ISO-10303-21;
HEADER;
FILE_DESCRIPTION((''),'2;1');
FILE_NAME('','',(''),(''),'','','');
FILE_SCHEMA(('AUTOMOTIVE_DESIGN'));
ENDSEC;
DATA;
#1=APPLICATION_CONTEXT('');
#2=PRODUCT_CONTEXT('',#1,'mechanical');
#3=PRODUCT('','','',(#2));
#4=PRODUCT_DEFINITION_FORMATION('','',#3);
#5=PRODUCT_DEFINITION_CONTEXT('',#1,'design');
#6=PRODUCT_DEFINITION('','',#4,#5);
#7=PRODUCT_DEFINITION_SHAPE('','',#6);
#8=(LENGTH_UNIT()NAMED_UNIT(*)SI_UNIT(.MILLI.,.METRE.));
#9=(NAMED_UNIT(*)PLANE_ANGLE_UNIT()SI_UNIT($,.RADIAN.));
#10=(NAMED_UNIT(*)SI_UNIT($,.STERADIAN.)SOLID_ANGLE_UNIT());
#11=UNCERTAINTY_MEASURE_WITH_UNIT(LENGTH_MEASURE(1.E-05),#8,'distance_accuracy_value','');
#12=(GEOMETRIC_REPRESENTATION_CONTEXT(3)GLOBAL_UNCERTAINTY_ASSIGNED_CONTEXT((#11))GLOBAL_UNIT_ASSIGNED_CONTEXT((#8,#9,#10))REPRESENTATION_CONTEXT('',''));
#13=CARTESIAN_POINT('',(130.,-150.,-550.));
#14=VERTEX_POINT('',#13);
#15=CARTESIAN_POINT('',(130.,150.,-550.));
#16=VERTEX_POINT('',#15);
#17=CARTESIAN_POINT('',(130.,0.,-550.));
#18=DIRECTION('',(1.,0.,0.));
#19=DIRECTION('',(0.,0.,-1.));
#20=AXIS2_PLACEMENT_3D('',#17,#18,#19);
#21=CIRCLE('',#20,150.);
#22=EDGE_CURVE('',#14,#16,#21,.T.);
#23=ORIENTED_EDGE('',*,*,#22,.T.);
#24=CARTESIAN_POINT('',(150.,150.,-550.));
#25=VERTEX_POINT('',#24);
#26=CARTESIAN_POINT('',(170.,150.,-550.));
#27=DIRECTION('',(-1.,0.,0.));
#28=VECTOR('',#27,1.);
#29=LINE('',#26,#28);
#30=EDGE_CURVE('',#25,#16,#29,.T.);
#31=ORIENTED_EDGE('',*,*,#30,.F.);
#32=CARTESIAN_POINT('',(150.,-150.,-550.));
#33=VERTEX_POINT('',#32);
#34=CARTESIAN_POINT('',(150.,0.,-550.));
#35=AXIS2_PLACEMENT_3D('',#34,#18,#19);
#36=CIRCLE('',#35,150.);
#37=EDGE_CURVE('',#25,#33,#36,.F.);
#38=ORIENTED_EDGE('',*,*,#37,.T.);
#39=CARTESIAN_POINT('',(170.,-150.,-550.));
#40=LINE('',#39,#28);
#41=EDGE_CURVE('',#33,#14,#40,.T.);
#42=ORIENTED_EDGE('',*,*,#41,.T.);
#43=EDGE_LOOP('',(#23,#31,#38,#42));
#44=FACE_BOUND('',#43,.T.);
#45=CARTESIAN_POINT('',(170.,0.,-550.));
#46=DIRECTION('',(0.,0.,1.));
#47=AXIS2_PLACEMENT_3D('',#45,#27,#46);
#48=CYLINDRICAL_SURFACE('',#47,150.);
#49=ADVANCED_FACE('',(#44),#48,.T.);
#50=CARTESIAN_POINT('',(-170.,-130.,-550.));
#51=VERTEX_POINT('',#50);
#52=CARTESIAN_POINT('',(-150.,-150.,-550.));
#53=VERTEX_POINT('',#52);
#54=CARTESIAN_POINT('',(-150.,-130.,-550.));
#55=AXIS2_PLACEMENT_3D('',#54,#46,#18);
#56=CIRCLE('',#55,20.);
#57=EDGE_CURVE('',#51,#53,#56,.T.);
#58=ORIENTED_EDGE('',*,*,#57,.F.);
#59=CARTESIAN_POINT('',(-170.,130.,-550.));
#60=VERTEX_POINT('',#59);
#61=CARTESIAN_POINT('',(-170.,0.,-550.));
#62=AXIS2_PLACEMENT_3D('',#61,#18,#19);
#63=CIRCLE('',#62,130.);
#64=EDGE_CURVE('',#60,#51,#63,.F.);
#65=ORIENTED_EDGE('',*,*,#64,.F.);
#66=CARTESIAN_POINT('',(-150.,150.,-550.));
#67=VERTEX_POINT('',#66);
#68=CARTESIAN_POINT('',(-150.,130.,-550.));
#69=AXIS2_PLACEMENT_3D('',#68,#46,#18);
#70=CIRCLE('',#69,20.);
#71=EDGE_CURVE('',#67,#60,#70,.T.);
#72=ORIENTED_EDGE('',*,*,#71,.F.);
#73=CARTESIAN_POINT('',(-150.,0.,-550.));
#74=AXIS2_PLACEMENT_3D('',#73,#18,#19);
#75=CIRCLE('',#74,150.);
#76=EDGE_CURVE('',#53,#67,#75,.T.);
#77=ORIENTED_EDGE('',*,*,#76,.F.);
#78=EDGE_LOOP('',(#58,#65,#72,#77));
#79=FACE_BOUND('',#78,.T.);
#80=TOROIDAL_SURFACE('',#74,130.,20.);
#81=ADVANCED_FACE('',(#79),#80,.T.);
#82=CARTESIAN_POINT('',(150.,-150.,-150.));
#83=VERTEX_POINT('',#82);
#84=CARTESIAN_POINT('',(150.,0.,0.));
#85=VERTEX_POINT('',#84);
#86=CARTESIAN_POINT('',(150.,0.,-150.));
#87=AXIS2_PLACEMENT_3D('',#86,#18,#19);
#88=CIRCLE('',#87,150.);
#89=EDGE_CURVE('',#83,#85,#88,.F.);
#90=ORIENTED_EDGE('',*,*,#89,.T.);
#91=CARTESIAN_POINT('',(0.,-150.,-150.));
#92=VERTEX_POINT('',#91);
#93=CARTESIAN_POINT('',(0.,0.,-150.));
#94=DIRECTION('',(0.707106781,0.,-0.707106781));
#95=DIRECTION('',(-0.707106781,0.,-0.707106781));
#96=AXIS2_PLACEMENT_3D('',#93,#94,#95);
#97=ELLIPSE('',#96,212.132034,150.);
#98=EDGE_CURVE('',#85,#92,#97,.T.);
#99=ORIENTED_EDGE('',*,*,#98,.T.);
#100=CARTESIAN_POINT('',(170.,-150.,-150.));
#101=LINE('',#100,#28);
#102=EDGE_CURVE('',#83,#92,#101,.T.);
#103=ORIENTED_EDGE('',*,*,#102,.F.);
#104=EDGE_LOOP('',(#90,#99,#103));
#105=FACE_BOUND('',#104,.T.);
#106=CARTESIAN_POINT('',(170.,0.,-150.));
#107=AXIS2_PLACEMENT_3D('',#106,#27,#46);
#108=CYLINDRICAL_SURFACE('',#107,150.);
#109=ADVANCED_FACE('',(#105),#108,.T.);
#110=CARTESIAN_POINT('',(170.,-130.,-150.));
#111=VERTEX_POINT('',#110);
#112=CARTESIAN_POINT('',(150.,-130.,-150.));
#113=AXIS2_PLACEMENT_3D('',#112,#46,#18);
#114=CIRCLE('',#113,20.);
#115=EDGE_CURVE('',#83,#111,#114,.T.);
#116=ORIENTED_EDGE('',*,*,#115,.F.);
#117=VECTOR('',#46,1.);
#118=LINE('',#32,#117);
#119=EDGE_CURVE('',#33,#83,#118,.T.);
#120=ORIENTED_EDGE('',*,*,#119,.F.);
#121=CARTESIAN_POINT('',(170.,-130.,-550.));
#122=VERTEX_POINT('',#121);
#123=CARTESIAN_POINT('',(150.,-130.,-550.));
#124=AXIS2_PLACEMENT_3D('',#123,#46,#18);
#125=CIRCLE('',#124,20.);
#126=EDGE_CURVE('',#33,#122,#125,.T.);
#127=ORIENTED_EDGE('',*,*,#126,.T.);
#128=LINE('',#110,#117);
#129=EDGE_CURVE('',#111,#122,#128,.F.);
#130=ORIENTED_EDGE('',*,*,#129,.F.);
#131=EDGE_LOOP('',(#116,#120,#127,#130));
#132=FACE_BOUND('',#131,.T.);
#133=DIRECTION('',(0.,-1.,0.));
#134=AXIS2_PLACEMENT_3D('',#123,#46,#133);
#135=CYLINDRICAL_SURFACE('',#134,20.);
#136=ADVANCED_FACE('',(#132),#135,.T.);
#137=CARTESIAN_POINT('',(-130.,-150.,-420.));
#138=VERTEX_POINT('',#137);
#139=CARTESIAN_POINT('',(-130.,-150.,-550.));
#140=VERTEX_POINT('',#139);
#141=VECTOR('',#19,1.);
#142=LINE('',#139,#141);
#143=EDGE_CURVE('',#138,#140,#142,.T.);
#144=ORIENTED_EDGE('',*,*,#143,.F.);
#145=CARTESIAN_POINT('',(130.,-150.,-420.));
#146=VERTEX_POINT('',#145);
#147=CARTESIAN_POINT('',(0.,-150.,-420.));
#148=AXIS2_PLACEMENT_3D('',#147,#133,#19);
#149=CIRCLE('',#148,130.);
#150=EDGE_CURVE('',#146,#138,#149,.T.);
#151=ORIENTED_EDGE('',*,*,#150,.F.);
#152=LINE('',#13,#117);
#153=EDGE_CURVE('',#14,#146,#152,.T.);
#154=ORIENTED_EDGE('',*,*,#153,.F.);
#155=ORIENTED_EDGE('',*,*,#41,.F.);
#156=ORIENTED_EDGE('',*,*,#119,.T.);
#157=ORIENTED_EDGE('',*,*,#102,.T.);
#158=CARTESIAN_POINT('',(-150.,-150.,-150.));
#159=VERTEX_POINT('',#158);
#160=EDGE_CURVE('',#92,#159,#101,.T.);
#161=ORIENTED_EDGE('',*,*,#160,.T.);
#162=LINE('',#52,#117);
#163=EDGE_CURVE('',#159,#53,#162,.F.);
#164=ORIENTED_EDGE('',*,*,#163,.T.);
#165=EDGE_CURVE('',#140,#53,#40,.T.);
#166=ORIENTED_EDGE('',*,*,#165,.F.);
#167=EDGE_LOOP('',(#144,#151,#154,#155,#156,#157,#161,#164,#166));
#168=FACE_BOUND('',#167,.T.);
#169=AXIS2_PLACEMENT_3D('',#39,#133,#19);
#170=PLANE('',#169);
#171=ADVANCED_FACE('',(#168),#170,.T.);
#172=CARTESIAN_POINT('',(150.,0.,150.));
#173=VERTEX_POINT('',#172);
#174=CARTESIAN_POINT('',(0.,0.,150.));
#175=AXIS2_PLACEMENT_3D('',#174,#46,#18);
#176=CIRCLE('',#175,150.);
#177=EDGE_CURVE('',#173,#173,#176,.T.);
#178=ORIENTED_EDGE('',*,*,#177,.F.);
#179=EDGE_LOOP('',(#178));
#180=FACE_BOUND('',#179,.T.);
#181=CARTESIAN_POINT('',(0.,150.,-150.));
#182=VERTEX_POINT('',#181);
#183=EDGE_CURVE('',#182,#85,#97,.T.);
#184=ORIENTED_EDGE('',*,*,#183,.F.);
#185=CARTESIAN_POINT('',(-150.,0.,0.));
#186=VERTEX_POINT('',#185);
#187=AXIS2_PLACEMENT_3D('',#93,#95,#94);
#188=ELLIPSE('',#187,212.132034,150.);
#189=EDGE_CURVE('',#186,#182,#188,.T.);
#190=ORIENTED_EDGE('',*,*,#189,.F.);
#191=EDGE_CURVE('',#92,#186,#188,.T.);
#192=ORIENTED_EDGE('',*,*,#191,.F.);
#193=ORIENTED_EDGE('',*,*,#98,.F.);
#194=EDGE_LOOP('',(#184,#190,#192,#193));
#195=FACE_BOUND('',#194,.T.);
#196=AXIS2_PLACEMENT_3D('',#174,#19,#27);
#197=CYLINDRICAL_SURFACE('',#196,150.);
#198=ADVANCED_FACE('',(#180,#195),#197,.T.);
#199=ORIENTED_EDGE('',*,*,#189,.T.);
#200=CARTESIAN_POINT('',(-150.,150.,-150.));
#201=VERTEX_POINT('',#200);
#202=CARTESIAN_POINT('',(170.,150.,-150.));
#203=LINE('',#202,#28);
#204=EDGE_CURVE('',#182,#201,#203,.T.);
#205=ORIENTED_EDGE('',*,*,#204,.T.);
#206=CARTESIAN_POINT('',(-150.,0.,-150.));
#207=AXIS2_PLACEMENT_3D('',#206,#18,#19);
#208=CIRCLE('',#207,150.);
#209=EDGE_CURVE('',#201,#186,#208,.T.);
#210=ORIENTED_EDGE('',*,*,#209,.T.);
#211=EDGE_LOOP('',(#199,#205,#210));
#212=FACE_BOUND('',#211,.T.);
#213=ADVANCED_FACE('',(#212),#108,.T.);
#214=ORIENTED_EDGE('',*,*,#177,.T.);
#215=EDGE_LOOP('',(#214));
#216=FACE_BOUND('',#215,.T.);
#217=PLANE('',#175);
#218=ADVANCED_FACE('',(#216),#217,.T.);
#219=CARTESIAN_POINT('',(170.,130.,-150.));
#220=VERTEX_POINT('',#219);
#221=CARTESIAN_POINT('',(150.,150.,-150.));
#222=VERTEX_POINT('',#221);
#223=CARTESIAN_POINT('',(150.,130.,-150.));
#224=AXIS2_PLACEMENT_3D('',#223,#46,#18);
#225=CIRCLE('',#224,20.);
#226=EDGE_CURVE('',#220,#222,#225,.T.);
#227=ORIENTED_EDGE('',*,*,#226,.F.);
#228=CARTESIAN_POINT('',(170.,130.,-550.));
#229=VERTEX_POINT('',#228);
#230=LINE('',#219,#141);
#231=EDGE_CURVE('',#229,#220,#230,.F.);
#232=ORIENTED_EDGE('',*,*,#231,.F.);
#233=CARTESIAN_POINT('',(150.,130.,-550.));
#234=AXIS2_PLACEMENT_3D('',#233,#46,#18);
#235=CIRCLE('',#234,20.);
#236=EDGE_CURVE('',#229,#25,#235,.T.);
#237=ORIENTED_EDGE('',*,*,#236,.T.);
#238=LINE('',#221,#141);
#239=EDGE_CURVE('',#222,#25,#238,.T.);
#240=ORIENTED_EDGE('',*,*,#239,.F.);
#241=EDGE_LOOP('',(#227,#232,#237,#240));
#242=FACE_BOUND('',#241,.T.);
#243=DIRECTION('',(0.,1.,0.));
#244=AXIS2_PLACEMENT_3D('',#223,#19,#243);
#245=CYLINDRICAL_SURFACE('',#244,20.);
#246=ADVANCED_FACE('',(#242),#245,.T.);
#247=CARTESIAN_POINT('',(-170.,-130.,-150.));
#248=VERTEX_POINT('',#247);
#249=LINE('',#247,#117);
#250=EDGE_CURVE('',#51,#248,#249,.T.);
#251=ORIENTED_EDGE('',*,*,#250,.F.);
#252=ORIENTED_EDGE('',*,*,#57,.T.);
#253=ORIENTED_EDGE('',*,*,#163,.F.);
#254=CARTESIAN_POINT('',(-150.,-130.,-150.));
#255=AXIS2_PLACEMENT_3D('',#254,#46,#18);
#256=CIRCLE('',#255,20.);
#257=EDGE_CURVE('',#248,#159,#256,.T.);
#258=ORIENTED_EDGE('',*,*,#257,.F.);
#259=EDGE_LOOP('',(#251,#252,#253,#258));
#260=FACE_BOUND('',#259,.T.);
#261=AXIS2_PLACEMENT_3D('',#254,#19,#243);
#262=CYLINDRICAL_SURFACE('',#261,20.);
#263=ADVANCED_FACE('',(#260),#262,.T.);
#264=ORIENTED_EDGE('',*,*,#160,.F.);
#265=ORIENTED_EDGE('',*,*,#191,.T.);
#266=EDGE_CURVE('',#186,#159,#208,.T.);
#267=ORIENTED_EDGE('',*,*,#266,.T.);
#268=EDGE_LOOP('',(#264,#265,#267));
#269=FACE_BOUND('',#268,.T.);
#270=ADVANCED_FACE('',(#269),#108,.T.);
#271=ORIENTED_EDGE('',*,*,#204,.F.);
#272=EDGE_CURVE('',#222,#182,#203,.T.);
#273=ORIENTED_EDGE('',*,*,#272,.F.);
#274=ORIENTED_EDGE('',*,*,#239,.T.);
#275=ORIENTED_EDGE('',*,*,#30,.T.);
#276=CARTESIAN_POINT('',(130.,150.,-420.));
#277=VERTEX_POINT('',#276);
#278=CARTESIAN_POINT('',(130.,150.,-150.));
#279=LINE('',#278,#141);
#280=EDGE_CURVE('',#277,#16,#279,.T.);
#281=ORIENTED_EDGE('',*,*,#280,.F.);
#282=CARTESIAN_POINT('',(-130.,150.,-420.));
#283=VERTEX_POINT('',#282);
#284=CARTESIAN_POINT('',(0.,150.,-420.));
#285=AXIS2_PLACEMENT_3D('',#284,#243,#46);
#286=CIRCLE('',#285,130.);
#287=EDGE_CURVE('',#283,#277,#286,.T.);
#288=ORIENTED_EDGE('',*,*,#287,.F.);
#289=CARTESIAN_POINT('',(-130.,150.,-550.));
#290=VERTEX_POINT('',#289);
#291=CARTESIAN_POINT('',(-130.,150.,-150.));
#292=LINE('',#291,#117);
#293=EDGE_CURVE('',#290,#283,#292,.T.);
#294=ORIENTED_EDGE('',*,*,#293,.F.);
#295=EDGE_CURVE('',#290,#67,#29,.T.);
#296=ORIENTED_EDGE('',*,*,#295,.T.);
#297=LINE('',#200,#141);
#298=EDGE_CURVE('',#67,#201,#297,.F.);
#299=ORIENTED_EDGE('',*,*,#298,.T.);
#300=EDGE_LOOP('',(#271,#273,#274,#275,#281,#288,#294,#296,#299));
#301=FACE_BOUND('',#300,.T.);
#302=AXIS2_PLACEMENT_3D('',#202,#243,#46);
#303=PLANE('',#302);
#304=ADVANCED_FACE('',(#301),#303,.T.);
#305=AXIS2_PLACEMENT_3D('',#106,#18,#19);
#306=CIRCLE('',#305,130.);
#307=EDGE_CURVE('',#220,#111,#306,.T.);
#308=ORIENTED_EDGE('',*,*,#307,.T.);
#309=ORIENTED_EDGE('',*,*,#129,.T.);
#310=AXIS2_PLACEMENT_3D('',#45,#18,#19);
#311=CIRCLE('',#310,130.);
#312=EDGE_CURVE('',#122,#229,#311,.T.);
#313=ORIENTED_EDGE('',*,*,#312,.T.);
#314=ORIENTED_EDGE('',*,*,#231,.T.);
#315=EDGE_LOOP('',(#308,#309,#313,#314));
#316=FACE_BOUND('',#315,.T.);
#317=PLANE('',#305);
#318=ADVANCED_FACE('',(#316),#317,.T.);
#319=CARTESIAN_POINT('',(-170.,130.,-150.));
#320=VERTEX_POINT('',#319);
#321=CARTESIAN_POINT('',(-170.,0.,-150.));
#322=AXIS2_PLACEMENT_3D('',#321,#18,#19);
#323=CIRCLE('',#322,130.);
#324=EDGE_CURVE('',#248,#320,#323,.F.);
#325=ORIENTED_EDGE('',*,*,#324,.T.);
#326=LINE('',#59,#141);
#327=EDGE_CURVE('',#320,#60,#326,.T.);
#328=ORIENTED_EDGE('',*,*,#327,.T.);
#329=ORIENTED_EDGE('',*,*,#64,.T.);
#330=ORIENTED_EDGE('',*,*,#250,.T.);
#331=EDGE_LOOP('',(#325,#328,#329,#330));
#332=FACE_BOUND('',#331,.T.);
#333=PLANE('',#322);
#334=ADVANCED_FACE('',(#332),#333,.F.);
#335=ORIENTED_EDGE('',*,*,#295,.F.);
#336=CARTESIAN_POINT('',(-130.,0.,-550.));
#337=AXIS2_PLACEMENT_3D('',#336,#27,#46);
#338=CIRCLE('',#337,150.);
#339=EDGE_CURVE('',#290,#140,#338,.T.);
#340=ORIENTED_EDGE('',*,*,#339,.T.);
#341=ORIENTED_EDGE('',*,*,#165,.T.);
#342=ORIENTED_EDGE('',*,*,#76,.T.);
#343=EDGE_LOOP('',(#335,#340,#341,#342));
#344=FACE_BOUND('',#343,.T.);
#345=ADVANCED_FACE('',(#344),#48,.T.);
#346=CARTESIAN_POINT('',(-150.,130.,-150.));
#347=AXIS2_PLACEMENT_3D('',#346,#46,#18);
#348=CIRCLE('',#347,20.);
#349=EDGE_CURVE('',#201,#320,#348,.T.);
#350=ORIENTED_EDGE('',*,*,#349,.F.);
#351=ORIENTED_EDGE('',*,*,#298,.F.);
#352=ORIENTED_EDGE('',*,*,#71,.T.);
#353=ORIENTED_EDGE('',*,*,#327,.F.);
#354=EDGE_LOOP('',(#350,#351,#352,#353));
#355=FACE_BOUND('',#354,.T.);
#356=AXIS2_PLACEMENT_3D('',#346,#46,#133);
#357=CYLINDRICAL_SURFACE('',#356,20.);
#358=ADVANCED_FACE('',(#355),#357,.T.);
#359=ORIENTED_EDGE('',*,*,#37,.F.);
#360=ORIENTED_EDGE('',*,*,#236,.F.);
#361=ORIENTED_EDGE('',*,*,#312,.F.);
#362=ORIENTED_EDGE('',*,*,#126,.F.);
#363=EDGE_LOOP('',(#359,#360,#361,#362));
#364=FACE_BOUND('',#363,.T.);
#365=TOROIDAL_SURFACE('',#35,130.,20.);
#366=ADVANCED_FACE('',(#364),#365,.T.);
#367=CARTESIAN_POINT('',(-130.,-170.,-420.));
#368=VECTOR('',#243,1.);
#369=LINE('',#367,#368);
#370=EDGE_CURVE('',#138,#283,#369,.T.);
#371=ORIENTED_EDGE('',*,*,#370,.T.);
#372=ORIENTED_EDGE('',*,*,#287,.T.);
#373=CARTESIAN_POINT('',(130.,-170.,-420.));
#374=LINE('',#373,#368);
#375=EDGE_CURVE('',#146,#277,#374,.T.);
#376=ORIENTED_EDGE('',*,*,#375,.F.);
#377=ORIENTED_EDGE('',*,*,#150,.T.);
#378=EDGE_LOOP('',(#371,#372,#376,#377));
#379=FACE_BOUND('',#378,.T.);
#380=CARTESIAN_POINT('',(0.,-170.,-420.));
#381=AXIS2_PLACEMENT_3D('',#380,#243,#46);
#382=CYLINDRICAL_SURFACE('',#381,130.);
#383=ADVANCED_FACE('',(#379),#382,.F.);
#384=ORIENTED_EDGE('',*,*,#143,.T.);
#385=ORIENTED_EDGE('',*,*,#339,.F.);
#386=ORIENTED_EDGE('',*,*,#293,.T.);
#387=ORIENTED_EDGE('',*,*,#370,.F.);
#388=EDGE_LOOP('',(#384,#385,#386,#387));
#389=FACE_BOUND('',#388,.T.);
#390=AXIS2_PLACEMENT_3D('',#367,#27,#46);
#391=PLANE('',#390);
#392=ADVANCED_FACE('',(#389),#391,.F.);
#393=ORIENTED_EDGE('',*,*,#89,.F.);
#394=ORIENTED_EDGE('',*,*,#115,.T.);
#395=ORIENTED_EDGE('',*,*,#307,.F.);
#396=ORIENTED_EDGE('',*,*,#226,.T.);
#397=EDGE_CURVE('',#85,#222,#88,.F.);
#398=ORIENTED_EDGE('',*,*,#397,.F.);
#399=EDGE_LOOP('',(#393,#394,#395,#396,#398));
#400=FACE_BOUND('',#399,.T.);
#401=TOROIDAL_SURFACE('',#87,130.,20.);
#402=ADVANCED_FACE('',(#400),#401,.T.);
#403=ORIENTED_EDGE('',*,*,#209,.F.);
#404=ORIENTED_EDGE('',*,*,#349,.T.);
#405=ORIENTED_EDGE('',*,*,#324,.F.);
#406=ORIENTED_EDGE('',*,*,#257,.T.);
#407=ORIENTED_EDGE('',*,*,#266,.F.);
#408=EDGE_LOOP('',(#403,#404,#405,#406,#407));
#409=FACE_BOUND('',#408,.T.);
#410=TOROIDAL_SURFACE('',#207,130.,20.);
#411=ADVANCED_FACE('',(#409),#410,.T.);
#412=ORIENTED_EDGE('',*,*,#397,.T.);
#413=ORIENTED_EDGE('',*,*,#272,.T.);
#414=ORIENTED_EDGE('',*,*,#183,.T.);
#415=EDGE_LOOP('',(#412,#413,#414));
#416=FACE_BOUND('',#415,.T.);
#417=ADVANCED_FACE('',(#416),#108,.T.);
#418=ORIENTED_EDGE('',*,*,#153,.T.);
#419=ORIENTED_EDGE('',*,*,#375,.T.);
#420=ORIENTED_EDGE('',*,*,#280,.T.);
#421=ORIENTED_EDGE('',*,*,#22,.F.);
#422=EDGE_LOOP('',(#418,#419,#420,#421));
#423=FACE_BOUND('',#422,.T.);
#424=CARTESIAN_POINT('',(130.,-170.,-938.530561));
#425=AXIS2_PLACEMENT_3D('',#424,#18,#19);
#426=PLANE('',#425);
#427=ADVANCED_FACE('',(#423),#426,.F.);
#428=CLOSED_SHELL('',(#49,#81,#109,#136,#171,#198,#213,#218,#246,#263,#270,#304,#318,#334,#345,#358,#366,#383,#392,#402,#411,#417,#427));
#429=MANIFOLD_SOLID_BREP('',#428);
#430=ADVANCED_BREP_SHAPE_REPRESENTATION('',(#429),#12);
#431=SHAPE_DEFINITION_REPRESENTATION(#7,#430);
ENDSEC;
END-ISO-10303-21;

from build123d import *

# Parameters (mm, degrees)
SKETCH_1_R          = 150
EXTRUDE_1_DEPTH     = 150
EXTRUDE_2_DEPTH     = 170
FILLET_1_R          = 20
FILLET_2_R          = 20
CUT_EXTRUDE_1_DEPTH = 170


with BuildPart() as part:
    # 草图1 → 凸台-拉伸1 (new, symmetric)
    with BuildSketch(Plane.XY):
        Circle(SKETCH_1_R)
    extrude(amount=EXTRUDE_1_DEPTH, both=True)

    # 草图3 → 凸台-拉伸2 (add, symmetric)
    with BuildSketch(Plane(origin=(0, 0, 0), x_dir=(0, 0, -1), z_dir=(1, 0, 0))):
        with BuildLine():
            Line((150, 150), (550, 150))
            ThreePointArc((550, 150), (700, 0), (550, -150))
            Line((550, -150), (150, -150))
            ThreePointArc((150, -150), (0, 0), (150, 150))
        make_face()
    extrude(amount=EXTRUDE_2_DEPTH, both=True)

    # 圆角1
    fillet_1_edges = [part.edges().sort_by_distance(p)[0] for p in [
        (170, -150, -350),
        (170, 150, -350),
        (170, 0, 0),
        (170, 0, -700),
    ]]
    fillet(fillet_1_edges, radius=FILLET_1_R - 0.0001)  # a hair under: the kernel refuses the full size

    # 圆角2
    fillet_2_edges = [part.edges().sort_by_distance(p)[0] for p in [
        (-170, 0, 0),
        (-170, 0, -700),
        (-170, 150, -350),
        (-170, -150, -350),
    ]]
    fillet(fillet_2_edges, radius=FILLET_2_R - 0.0001)  # a hair under: the kernel refuses the full size

    # 草图4 → 切除-拉伸1 (cut, symmetric)
    with BuildSketch(Plane(origin=(0, 0, 0), x_dir=(1, 0, 0), z_dir=(0, 1, 0))):
        with BuildLine():
            Line((-130, 420), (-130, 938.530561272))
            Line((-130, 938.530561272), (130, 938.530561272))
            Line((130, 938.530561272), (130, 420))
            ThreePointArc((130, 420), (0, 290), (-130, 420))
        make_face()
    extrude(amount=CUT_EXTRUDE_1_DEPTH, both=True, mode=Mode.SUBTRACT)


solid = part.part
